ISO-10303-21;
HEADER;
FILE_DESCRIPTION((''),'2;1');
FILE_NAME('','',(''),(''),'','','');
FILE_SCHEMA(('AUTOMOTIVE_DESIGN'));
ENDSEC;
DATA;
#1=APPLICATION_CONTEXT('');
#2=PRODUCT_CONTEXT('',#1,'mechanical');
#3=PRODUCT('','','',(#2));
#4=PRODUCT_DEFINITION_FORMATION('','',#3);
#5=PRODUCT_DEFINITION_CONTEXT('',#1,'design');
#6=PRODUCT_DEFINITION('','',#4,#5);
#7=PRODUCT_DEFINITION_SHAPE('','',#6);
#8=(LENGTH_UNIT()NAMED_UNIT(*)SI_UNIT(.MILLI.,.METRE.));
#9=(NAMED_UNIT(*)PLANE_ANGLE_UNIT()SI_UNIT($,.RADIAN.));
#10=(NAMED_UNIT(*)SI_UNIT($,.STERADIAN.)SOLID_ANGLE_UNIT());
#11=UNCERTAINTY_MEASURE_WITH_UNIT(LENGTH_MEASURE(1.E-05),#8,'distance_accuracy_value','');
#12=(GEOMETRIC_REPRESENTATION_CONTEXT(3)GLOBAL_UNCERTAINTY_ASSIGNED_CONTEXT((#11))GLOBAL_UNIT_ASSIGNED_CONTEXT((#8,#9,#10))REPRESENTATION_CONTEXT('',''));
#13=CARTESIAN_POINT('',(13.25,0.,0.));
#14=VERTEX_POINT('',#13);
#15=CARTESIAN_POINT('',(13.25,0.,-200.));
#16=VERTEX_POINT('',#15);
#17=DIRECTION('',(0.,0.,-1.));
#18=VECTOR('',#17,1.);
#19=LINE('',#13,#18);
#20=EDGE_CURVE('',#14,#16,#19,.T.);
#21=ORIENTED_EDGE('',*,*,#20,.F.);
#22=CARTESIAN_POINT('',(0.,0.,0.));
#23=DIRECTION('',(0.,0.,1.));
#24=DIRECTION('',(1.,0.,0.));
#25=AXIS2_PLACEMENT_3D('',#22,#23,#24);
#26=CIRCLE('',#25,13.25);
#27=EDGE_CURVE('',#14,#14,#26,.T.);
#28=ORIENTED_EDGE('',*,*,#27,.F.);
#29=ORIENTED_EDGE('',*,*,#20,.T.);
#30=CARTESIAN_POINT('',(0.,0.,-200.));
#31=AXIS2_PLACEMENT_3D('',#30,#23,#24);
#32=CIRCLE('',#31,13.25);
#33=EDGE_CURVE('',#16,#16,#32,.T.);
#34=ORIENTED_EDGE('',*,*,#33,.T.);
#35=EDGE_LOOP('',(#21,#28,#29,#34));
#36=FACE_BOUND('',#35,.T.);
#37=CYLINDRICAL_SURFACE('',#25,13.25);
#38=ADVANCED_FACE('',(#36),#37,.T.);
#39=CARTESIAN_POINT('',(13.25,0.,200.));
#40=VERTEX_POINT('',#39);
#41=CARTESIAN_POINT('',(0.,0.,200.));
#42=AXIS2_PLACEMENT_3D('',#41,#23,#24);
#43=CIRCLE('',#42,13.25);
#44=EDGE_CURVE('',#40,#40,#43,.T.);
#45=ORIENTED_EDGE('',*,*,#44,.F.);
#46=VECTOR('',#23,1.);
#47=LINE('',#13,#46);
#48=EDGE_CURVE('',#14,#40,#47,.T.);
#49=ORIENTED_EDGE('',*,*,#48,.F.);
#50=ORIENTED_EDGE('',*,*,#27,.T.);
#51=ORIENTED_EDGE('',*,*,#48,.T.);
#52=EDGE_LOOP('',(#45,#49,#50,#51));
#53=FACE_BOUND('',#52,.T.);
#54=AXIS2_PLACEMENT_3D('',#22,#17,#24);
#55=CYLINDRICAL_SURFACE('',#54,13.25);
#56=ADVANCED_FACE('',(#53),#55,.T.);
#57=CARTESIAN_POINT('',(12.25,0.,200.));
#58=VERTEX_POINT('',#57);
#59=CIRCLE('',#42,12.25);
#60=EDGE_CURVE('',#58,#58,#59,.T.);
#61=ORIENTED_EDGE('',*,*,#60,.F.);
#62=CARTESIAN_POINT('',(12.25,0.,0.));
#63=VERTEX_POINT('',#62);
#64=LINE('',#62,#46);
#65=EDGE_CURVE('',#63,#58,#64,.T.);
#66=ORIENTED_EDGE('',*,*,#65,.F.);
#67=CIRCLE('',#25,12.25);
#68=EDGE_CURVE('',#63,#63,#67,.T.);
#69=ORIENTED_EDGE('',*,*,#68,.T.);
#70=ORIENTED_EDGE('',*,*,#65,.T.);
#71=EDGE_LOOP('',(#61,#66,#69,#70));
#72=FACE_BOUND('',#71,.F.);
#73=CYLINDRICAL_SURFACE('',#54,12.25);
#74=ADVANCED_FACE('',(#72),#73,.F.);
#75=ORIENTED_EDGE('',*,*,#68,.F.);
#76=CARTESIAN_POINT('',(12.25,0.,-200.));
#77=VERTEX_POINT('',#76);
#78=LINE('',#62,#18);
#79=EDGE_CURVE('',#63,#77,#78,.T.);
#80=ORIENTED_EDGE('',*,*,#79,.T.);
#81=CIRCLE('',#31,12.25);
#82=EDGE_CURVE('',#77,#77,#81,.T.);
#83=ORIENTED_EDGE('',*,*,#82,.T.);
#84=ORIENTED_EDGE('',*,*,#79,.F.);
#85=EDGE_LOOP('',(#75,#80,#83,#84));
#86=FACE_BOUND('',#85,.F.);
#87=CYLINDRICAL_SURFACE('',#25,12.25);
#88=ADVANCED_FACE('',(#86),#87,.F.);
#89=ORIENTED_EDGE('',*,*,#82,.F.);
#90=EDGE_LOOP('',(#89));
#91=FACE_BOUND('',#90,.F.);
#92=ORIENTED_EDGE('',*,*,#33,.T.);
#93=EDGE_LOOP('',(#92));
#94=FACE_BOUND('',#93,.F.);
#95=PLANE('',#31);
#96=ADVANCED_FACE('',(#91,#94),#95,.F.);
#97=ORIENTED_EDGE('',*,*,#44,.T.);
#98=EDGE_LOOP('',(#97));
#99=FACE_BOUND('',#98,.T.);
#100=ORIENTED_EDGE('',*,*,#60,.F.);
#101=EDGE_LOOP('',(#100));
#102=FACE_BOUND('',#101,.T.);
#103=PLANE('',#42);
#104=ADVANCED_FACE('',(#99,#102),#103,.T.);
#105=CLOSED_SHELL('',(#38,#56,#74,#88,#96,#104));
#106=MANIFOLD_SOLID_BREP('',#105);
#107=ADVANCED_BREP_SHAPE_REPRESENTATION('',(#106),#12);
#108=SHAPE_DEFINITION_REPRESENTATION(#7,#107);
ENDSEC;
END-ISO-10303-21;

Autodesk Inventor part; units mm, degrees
ref_plane "YZ Plane" through (0, 0, 0) normal (1, 0, 0) x (0, 1, 0)
ref_plane "XZ Plane" through (0, 0, 0) normal (0, 1, 0) x (-1, 0, 0)
ref_plane "XY Plane" through (0, 0, 0) normal (0, 0, 1) x (1, 0, 0)
sketch "Sketch1" plane through (0, 0, 0) normal (0, 0, 1) x (1, 0, 0)
  circle A0 centre (0, 0) radius 13.25
  circle A1 centre (0, 0) radius 12.25
  dimension "d0" = 26.5
  dimension "d1" = 1
extrude "Extrusion1" add sketch "Sketch1" along normal mid plane 400
thread "Thread1" size "M20x2.5" class "6g" standard "ANSI Metric M Profile" length 37
thread "Thread2" size "M20x2.5" class "6g" standard "ANSI Metric M Profile" length 37
properties part number "Threaded pipe"
